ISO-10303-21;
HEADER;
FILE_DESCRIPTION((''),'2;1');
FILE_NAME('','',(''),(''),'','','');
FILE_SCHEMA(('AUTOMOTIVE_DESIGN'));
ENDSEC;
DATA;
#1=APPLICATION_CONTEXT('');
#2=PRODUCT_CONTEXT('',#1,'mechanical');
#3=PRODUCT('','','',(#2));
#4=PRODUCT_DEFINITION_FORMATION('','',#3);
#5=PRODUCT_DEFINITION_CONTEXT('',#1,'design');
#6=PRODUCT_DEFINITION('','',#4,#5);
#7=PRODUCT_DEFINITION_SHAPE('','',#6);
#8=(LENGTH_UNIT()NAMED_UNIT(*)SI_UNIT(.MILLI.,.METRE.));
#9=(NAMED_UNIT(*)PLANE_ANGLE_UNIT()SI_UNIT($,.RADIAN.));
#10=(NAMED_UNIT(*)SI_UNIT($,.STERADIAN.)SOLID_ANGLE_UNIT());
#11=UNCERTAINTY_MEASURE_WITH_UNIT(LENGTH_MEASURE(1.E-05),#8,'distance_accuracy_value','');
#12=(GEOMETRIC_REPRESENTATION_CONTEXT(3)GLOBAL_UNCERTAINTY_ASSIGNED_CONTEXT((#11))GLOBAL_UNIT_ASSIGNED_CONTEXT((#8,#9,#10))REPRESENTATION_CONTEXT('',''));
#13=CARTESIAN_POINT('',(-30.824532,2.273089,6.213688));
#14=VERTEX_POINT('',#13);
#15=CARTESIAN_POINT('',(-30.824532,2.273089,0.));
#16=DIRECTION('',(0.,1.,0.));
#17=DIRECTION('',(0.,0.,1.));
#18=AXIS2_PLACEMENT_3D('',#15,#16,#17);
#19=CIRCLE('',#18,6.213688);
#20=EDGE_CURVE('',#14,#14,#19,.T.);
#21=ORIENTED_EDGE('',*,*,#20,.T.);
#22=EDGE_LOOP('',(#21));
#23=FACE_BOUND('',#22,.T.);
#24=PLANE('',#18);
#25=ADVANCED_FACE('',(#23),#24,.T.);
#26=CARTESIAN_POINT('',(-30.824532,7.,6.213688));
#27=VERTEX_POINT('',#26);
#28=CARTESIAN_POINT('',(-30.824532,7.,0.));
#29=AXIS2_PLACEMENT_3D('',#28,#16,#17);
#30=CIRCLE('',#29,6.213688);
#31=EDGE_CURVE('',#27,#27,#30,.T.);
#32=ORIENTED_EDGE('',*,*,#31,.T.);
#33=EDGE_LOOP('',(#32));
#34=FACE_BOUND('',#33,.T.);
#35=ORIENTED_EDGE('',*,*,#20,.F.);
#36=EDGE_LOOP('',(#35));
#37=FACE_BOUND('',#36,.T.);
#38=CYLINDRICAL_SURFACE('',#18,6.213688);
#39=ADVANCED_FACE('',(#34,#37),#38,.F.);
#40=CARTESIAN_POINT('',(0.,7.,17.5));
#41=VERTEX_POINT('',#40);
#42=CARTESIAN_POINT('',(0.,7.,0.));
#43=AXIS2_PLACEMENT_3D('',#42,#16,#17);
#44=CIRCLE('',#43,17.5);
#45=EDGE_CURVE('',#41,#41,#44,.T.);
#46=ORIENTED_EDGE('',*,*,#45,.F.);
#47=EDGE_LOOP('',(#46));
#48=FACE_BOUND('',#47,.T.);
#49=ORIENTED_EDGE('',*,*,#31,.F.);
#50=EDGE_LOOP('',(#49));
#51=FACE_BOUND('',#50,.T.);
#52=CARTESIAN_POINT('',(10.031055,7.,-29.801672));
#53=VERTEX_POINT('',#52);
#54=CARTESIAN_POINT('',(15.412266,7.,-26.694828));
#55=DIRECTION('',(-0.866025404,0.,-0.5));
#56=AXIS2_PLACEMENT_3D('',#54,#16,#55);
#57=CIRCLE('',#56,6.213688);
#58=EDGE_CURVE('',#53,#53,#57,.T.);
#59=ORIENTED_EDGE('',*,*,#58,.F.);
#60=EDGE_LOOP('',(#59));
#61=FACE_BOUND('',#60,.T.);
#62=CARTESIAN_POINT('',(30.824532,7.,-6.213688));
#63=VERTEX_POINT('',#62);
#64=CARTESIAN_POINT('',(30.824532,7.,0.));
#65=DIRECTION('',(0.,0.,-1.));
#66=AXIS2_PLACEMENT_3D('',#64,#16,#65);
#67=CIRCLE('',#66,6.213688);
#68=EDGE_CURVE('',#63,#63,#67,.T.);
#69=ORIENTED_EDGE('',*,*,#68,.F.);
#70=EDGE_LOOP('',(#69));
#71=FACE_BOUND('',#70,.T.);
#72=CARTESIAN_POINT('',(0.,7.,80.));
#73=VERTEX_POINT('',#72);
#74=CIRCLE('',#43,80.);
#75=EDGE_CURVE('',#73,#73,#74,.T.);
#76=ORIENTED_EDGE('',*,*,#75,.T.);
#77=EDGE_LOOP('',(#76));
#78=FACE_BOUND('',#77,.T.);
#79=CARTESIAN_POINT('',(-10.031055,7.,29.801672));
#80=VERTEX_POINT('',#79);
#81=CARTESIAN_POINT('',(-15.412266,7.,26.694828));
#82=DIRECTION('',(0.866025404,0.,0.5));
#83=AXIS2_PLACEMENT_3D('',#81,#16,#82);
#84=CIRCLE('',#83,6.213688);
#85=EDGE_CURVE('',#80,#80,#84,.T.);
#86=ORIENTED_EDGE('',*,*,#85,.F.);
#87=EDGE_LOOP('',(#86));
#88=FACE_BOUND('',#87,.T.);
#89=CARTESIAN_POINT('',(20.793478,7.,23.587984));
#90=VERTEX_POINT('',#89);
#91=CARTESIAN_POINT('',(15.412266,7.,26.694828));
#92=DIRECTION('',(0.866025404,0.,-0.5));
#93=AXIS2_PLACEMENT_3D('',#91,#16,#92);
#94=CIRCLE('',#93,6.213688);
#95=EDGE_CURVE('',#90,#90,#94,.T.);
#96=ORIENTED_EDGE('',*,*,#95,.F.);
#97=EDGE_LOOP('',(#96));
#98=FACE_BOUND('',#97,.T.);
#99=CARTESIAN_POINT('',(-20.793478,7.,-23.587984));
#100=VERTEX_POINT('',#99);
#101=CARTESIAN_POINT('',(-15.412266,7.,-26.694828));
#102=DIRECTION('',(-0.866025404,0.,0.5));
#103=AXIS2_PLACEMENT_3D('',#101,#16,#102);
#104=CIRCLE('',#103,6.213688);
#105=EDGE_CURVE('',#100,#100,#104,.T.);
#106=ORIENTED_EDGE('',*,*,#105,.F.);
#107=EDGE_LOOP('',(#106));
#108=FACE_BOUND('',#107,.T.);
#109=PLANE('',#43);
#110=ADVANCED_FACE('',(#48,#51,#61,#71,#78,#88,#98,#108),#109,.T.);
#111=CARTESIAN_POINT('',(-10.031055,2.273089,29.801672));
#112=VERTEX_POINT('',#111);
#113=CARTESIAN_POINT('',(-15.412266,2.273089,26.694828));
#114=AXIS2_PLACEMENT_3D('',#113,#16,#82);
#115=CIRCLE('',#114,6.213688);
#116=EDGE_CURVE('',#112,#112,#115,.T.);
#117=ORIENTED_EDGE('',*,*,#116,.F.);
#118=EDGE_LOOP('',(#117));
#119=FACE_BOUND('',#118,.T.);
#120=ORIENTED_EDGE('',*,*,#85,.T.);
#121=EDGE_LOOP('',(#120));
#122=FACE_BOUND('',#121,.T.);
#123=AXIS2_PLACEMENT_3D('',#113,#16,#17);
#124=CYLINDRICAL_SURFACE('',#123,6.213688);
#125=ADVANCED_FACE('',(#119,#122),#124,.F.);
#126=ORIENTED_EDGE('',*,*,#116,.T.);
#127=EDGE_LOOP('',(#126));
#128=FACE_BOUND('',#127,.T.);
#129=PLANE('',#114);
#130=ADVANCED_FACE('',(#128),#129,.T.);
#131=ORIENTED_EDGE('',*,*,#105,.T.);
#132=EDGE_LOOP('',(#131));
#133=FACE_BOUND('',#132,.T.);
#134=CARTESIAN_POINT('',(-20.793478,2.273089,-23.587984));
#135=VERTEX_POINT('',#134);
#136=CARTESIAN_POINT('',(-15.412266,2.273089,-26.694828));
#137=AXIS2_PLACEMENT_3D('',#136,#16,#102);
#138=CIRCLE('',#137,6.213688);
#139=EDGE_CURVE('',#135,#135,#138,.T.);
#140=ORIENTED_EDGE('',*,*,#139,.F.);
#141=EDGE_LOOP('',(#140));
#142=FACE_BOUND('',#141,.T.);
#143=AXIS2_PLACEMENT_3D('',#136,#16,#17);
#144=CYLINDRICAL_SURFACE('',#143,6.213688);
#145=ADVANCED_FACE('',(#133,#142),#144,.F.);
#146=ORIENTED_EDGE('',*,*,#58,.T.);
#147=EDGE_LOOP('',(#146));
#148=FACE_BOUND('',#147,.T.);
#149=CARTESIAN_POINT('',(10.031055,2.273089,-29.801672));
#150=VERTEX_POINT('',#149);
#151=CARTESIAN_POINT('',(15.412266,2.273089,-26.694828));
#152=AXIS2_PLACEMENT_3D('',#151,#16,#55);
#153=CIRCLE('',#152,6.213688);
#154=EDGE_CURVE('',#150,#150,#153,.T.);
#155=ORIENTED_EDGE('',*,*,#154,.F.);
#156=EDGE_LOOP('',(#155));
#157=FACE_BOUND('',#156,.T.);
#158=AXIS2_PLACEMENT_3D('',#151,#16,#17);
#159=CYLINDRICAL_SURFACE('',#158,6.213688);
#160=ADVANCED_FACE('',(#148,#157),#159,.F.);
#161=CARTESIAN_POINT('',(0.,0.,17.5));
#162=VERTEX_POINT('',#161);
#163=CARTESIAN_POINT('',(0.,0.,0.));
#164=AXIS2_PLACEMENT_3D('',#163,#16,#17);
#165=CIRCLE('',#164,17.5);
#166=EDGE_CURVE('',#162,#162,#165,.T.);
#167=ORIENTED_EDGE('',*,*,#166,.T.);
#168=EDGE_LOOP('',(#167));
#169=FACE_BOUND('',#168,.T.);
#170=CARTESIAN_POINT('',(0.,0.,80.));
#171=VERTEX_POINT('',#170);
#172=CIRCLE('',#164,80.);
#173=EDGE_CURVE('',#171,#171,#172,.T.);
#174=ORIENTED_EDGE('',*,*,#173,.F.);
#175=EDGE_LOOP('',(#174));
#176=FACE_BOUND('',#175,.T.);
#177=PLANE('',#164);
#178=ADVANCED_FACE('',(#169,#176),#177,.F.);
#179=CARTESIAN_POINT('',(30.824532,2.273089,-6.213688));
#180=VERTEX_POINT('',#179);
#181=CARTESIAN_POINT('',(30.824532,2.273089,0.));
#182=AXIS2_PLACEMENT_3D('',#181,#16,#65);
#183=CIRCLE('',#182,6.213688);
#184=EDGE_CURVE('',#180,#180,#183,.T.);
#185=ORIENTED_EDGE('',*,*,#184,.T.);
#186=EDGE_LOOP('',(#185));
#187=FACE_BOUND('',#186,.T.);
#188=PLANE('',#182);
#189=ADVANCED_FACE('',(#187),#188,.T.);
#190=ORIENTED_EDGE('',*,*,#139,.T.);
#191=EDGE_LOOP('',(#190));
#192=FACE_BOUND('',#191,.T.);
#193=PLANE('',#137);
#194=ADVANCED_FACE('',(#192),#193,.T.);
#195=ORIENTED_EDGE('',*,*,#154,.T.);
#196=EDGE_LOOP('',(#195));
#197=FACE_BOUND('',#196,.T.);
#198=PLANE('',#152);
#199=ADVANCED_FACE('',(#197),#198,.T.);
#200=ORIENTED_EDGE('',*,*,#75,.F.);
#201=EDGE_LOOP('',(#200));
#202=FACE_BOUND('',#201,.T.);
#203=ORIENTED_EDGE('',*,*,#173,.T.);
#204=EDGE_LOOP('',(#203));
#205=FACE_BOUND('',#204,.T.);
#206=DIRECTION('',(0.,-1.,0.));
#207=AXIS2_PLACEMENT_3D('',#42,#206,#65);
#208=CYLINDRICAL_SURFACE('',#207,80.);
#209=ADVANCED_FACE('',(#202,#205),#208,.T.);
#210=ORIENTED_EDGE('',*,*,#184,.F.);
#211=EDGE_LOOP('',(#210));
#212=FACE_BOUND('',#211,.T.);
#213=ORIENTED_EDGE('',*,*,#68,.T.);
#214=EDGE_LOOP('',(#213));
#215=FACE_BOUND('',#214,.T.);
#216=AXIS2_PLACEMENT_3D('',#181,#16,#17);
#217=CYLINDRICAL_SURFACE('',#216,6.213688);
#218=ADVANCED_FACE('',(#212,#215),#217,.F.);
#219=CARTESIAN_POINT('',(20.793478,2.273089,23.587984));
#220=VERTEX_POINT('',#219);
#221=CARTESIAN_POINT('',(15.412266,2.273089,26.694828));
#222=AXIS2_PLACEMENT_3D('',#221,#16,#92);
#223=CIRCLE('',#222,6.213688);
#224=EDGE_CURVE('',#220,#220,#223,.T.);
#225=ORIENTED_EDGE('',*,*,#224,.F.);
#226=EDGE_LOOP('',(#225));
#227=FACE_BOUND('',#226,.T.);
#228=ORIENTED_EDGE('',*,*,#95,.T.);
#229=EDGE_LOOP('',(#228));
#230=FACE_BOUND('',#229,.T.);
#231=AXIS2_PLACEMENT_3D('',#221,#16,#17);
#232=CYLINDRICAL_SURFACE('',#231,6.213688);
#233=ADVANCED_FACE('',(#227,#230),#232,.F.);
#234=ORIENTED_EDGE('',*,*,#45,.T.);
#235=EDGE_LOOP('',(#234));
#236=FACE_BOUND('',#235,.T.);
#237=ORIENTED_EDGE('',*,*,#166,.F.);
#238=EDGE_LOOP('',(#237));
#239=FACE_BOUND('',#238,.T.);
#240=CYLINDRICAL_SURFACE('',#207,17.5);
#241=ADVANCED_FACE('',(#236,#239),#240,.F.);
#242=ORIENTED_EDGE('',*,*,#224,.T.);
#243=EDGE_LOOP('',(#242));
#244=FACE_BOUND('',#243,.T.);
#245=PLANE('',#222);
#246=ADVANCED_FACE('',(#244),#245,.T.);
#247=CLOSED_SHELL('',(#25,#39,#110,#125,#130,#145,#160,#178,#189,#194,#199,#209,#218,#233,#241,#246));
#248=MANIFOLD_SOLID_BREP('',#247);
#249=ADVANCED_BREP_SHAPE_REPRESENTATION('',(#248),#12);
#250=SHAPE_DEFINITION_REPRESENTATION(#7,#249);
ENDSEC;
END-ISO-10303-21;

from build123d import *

# Parameters (mm, degrees)
SKETCH1_R           = 80
BOSS_EXTRUDE1_DEPTH = 7
SKETCH2_R           = 17.5
CUT_EXTRUDE1_DEPTH  = 114.353429591
SKETCH3_R           = 6.213687844
CUT_EXTRUDE2_DEPTH  = 4.726910953
CIRPATTERN1_COUNT   = 6


with BuildPart() as part:
    # Sketch1 → Boss-Extrude1 (new body)
    with BuildSketch(Plane(origin=(0, 0, 0), x_dir=(1, 0, 0), z_dir=(0, 1, 0))):
        Circle(SKETCH1_R)
    extrude(amount=BOSS_EXTRUDE1_DEPTH)

    # Sketch2 → Cut-Extrude1 (cut, through all)
    with BuildSketch(Plane(origin=(0, 0, 0), x_dir=(1, 0, 0), z_dir=(0, 1, 0))):
        Circle(SKETCH2_R)
    extrude(amount=CUT_EXTRUDE1_DEPTH, mode=Mode.SUBTRACT)

    # Sketch3 → Cut-Extrude2 (cut)
    with BuildSketch(Plane(origin=(0, 7, 0), x_dir=(1, 0, 0), z_dir=(0, 1, 0))):
        with Locations((-30.824532404, 0)):
            Circle(SKETCH3_R)
    cut_extrude2 = extrude(amount=-CUT_EXTRUDE2_DEPTH, mode=Mode.SUBTRACT)

    # CirPattern1: Cut-Extrude2 ×6 about axis
    cirpattern1_axis = Axis((0, 0, 0), (0, 1, 0))
    for i in range(1, CIRPATTERN1_COUNT):
        add(cut_extrude2.rotate(cirpattern1_axis, i * 360 / CIRPATTERN1_COUNT), mode=Mode.SUBTRACT)


solid = part.part
